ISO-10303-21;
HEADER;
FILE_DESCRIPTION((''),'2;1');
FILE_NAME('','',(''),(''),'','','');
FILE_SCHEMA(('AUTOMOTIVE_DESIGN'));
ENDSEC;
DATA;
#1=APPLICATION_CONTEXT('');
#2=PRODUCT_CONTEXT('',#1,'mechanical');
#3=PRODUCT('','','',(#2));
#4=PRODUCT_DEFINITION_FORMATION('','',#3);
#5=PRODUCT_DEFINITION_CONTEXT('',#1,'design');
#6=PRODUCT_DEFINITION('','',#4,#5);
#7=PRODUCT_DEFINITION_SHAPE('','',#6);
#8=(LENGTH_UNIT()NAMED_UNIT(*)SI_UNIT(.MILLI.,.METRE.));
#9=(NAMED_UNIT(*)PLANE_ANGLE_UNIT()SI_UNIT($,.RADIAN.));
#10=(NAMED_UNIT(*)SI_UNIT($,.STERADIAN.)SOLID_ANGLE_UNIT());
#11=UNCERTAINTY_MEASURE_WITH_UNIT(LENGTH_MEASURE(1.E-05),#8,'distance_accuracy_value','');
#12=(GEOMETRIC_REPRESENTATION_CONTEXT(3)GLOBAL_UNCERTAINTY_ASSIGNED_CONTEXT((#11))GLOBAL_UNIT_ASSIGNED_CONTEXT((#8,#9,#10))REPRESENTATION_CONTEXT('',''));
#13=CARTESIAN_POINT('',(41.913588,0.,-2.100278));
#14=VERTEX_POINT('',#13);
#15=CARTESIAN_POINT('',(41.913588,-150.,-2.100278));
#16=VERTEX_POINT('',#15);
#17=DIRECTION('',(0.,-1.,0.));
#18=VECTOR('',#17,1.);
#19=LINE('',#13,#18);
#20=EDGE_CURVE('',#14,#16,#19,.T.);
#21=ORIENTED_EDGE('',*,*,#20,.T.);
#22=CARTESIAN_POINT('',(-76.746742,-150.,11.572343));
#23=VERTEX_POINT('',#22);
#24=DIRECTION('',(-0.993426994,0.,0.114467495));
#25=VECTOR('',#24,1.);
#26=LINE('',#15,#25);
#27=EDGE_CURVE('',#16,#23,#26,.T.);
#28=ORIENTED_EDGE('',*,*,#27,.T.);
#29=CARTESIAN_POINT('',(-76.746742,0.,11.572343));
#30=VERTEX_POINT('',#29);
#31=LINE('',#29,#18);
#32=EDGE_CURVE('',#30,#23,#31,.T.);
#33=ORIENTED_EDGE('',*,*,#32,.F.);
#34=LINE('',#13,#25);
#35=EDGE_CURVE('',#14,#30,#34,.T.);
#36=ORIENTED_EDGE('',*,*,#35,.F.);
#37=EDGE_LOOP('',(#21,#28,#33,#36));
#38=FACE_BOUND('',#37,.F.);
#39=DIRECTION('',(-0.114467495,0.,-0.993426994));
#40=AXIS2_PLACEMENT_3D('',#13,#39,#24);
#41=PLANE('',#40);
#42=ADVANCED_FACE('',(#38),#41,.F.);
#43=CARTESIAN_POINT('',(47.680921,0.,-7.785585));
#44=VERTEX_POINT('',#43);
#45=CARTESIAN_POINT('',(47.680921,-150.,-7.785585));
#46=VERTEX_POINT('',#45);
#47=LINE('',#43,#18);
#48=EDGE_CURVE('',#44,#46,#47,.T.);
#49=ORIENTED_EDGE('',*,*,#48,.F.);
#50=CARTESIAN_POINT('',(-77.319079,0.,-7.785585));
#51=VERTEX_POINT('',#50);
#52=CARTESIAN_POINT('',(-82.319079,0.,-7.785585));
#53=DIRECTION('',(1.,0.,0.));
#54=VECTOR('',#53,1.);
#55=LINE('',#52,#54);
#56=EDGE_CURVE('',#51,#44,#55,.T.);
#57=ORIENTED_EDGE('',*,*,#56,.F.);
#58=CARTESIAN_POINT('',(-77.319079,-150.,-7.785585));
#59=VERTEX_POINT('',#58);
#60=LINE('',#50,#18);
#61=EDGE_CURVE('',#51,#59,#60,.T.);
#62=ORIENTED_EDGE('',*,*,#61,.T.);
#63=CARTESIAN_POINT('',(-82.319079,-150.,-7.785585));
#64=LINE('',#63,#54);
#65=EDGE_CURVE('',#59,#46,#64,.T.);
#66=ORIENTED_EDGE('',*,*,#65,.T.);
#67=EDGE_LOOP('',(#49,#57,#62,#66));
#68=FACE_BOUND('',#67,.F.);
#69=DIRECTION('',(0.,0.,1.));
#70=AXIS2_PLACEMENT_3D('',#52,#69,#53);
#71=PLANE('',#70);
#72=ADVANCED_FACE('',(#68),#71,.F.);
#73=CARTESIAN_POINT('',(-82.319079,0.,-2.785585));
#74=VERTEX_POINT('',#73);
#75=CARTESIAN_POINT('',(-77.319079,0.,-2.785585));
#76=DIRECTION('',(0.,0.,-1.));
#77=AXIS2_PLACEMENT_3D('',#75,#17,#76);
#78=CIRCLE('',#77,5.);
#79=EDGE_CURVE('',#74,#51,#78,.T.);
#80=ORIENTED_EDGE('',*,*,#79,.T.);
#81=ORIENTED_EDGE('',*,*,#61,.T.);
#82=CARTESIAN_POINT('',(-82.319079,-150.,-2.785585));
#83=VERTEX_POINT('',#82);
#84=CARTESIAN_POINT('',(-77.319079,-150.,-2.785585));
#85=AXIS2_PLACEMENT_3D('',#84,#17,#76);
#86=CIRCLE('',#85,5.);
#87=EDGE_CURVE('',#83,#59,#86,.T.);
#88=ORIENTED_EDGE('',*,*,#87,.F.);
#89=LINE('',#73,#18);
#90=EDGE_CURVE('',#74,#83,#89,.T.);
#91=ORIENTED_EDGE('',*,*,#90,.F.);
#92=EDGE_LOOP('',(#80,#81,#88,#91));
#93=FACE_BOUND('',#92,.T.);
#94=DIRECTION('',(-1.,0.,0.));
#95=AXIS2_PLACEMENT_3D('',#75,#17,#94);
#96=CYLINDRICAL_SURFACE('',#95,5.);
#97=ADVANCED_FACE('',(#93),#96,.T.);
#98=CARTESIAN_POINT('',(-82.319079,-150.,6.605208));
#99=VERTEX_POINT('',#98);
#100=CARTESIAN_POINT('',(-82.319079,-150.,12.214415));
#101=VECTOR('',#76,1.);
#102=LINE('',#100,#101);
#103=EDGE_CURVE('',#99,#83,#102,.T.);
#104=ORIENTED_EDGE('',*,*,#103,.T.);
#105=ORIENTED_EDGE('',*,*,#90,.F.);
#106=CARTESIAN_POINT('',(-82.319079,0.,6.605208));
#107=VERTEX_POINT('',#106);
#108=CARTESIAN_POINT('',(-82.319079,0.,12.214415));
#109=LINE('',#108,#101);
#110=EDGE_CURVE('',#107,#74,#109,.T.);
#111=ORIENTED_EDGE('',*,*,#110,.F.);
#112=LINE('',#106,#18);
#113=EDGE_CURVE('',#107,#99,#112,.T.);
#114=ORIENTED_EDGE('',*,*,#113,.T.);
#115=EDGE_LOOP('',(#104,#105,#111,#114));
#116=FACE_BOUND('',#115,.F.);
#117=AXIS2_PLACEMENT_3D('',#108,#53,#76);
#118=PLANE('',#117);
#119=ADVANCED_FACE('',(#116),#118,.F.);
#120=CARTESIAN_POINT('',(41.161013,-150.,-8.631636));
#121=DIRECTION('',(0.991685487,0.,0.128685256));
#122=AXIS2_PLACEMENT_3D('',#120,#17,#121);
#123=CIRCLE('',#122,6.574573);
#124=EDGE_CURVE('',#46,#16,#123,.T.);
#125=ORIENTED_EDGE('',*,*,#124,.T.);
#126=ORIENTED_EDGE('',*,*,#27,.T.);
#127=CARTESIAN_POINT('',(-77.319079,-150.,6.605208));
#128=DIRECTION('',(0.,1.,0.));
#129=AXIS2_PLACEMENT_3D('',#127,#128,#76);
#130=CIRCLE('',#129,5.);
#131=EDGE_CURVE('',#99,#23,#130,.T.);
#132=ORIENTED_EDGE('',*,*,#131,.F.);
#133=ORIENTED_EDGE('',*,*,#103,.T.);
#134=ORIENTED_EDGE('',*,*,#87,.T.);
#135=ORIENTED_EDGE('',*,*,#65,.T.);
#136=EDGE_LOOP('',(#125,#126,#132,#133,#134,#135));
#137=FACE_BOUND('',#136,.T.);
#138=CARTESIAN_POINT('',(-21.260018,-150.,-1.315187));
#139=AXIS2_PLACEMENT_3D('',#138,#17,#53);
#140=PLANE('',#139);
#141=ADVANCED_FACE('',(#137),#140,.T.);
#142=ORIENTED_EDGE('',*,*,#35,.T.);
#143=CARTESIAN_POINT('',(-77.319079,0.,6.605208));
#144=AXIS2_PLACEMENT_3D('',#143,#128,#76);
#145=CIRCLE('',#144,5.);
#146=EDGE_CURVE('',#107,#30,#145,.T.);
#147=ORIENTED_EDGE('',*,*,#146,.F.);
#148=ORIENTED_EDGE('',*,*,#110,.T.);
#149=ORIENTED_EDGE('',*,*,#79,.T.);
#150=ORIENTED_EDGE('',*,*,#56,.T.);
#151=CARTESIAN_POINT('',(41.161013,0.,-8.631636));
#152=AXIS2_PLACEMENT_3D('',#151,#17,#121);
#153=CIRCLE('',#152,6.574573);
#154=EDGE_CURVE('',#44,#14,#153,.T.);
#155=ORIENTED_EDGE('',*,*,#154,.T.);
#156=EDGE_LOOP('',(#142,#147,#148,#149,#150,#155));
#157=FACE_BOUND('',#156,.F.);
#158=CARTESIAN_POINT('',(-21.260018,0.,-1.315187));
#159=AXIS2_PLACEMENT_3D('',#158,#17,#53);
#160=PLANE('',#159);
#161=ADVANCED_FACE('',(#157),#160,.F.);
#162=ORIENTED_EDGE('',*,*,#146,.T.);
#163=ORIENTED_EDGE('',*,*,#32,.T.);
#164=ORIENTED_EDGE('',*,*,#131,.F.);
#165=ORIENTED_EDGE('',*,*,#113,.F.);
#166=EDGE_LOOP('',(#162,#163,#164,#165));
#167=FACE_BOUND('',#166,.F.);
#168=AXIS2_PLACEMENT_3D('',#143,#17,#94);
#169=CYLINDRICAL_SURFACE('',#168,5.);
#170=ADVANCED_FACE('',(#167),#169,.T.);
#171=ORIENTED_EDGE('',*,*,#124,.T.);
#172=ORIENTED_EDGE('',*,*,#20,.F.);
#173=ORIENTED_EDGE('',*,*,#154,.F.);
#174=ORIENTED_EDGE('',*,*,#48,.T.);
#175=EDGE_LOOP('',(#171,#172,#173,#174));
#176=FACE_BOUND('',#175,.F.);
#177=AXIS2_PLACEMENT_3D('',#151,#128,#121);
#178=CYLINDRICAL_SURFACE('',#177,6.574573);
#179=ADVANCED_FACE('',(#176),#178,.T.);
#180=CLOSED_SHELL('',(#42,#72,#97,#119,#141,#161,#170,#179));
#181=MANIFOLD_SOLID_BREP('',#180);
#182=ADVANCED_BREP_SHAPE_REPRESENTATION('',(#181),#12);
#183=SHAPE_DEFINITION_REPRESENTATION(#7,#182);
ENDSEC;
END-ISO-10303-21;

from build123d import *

# Parameters (mm, degrees)
F1_DEPTH = 150
F2_R     = 5


with BuildPart() as f1:
    # F0 (on Front) → F1 (new body)
    with BuildSketch(Plane.XZ):
        with BuildLine():
            Line((-82.3190790229, 12.2144147383), (-82.3190790229, -7.7855852617))
            Line((-82.3190790229, -7.7855852617), (47.6809209771, -7.7855852617))
            ThreePointArc((47.6809209771, -7.7855852617), (45.7765227323, -3.9495345355), (41.9135876, -2.1002779249))
            Line((41.9135876, -2.1002779249), (-82.3190790229, 12.2144147383))
        make_face()
    extrude(amount=F1_DEPTH)

    # F2
    f2_edges = [f1.edges().sort_by_distance(p)[0] for p in [
        (-82.319079, -75, 12.214415),
        (-82.319079, -75, -7.785585),
    ]]
    fillet(f2_edges, radius=F2_R)


solid = f1.part
